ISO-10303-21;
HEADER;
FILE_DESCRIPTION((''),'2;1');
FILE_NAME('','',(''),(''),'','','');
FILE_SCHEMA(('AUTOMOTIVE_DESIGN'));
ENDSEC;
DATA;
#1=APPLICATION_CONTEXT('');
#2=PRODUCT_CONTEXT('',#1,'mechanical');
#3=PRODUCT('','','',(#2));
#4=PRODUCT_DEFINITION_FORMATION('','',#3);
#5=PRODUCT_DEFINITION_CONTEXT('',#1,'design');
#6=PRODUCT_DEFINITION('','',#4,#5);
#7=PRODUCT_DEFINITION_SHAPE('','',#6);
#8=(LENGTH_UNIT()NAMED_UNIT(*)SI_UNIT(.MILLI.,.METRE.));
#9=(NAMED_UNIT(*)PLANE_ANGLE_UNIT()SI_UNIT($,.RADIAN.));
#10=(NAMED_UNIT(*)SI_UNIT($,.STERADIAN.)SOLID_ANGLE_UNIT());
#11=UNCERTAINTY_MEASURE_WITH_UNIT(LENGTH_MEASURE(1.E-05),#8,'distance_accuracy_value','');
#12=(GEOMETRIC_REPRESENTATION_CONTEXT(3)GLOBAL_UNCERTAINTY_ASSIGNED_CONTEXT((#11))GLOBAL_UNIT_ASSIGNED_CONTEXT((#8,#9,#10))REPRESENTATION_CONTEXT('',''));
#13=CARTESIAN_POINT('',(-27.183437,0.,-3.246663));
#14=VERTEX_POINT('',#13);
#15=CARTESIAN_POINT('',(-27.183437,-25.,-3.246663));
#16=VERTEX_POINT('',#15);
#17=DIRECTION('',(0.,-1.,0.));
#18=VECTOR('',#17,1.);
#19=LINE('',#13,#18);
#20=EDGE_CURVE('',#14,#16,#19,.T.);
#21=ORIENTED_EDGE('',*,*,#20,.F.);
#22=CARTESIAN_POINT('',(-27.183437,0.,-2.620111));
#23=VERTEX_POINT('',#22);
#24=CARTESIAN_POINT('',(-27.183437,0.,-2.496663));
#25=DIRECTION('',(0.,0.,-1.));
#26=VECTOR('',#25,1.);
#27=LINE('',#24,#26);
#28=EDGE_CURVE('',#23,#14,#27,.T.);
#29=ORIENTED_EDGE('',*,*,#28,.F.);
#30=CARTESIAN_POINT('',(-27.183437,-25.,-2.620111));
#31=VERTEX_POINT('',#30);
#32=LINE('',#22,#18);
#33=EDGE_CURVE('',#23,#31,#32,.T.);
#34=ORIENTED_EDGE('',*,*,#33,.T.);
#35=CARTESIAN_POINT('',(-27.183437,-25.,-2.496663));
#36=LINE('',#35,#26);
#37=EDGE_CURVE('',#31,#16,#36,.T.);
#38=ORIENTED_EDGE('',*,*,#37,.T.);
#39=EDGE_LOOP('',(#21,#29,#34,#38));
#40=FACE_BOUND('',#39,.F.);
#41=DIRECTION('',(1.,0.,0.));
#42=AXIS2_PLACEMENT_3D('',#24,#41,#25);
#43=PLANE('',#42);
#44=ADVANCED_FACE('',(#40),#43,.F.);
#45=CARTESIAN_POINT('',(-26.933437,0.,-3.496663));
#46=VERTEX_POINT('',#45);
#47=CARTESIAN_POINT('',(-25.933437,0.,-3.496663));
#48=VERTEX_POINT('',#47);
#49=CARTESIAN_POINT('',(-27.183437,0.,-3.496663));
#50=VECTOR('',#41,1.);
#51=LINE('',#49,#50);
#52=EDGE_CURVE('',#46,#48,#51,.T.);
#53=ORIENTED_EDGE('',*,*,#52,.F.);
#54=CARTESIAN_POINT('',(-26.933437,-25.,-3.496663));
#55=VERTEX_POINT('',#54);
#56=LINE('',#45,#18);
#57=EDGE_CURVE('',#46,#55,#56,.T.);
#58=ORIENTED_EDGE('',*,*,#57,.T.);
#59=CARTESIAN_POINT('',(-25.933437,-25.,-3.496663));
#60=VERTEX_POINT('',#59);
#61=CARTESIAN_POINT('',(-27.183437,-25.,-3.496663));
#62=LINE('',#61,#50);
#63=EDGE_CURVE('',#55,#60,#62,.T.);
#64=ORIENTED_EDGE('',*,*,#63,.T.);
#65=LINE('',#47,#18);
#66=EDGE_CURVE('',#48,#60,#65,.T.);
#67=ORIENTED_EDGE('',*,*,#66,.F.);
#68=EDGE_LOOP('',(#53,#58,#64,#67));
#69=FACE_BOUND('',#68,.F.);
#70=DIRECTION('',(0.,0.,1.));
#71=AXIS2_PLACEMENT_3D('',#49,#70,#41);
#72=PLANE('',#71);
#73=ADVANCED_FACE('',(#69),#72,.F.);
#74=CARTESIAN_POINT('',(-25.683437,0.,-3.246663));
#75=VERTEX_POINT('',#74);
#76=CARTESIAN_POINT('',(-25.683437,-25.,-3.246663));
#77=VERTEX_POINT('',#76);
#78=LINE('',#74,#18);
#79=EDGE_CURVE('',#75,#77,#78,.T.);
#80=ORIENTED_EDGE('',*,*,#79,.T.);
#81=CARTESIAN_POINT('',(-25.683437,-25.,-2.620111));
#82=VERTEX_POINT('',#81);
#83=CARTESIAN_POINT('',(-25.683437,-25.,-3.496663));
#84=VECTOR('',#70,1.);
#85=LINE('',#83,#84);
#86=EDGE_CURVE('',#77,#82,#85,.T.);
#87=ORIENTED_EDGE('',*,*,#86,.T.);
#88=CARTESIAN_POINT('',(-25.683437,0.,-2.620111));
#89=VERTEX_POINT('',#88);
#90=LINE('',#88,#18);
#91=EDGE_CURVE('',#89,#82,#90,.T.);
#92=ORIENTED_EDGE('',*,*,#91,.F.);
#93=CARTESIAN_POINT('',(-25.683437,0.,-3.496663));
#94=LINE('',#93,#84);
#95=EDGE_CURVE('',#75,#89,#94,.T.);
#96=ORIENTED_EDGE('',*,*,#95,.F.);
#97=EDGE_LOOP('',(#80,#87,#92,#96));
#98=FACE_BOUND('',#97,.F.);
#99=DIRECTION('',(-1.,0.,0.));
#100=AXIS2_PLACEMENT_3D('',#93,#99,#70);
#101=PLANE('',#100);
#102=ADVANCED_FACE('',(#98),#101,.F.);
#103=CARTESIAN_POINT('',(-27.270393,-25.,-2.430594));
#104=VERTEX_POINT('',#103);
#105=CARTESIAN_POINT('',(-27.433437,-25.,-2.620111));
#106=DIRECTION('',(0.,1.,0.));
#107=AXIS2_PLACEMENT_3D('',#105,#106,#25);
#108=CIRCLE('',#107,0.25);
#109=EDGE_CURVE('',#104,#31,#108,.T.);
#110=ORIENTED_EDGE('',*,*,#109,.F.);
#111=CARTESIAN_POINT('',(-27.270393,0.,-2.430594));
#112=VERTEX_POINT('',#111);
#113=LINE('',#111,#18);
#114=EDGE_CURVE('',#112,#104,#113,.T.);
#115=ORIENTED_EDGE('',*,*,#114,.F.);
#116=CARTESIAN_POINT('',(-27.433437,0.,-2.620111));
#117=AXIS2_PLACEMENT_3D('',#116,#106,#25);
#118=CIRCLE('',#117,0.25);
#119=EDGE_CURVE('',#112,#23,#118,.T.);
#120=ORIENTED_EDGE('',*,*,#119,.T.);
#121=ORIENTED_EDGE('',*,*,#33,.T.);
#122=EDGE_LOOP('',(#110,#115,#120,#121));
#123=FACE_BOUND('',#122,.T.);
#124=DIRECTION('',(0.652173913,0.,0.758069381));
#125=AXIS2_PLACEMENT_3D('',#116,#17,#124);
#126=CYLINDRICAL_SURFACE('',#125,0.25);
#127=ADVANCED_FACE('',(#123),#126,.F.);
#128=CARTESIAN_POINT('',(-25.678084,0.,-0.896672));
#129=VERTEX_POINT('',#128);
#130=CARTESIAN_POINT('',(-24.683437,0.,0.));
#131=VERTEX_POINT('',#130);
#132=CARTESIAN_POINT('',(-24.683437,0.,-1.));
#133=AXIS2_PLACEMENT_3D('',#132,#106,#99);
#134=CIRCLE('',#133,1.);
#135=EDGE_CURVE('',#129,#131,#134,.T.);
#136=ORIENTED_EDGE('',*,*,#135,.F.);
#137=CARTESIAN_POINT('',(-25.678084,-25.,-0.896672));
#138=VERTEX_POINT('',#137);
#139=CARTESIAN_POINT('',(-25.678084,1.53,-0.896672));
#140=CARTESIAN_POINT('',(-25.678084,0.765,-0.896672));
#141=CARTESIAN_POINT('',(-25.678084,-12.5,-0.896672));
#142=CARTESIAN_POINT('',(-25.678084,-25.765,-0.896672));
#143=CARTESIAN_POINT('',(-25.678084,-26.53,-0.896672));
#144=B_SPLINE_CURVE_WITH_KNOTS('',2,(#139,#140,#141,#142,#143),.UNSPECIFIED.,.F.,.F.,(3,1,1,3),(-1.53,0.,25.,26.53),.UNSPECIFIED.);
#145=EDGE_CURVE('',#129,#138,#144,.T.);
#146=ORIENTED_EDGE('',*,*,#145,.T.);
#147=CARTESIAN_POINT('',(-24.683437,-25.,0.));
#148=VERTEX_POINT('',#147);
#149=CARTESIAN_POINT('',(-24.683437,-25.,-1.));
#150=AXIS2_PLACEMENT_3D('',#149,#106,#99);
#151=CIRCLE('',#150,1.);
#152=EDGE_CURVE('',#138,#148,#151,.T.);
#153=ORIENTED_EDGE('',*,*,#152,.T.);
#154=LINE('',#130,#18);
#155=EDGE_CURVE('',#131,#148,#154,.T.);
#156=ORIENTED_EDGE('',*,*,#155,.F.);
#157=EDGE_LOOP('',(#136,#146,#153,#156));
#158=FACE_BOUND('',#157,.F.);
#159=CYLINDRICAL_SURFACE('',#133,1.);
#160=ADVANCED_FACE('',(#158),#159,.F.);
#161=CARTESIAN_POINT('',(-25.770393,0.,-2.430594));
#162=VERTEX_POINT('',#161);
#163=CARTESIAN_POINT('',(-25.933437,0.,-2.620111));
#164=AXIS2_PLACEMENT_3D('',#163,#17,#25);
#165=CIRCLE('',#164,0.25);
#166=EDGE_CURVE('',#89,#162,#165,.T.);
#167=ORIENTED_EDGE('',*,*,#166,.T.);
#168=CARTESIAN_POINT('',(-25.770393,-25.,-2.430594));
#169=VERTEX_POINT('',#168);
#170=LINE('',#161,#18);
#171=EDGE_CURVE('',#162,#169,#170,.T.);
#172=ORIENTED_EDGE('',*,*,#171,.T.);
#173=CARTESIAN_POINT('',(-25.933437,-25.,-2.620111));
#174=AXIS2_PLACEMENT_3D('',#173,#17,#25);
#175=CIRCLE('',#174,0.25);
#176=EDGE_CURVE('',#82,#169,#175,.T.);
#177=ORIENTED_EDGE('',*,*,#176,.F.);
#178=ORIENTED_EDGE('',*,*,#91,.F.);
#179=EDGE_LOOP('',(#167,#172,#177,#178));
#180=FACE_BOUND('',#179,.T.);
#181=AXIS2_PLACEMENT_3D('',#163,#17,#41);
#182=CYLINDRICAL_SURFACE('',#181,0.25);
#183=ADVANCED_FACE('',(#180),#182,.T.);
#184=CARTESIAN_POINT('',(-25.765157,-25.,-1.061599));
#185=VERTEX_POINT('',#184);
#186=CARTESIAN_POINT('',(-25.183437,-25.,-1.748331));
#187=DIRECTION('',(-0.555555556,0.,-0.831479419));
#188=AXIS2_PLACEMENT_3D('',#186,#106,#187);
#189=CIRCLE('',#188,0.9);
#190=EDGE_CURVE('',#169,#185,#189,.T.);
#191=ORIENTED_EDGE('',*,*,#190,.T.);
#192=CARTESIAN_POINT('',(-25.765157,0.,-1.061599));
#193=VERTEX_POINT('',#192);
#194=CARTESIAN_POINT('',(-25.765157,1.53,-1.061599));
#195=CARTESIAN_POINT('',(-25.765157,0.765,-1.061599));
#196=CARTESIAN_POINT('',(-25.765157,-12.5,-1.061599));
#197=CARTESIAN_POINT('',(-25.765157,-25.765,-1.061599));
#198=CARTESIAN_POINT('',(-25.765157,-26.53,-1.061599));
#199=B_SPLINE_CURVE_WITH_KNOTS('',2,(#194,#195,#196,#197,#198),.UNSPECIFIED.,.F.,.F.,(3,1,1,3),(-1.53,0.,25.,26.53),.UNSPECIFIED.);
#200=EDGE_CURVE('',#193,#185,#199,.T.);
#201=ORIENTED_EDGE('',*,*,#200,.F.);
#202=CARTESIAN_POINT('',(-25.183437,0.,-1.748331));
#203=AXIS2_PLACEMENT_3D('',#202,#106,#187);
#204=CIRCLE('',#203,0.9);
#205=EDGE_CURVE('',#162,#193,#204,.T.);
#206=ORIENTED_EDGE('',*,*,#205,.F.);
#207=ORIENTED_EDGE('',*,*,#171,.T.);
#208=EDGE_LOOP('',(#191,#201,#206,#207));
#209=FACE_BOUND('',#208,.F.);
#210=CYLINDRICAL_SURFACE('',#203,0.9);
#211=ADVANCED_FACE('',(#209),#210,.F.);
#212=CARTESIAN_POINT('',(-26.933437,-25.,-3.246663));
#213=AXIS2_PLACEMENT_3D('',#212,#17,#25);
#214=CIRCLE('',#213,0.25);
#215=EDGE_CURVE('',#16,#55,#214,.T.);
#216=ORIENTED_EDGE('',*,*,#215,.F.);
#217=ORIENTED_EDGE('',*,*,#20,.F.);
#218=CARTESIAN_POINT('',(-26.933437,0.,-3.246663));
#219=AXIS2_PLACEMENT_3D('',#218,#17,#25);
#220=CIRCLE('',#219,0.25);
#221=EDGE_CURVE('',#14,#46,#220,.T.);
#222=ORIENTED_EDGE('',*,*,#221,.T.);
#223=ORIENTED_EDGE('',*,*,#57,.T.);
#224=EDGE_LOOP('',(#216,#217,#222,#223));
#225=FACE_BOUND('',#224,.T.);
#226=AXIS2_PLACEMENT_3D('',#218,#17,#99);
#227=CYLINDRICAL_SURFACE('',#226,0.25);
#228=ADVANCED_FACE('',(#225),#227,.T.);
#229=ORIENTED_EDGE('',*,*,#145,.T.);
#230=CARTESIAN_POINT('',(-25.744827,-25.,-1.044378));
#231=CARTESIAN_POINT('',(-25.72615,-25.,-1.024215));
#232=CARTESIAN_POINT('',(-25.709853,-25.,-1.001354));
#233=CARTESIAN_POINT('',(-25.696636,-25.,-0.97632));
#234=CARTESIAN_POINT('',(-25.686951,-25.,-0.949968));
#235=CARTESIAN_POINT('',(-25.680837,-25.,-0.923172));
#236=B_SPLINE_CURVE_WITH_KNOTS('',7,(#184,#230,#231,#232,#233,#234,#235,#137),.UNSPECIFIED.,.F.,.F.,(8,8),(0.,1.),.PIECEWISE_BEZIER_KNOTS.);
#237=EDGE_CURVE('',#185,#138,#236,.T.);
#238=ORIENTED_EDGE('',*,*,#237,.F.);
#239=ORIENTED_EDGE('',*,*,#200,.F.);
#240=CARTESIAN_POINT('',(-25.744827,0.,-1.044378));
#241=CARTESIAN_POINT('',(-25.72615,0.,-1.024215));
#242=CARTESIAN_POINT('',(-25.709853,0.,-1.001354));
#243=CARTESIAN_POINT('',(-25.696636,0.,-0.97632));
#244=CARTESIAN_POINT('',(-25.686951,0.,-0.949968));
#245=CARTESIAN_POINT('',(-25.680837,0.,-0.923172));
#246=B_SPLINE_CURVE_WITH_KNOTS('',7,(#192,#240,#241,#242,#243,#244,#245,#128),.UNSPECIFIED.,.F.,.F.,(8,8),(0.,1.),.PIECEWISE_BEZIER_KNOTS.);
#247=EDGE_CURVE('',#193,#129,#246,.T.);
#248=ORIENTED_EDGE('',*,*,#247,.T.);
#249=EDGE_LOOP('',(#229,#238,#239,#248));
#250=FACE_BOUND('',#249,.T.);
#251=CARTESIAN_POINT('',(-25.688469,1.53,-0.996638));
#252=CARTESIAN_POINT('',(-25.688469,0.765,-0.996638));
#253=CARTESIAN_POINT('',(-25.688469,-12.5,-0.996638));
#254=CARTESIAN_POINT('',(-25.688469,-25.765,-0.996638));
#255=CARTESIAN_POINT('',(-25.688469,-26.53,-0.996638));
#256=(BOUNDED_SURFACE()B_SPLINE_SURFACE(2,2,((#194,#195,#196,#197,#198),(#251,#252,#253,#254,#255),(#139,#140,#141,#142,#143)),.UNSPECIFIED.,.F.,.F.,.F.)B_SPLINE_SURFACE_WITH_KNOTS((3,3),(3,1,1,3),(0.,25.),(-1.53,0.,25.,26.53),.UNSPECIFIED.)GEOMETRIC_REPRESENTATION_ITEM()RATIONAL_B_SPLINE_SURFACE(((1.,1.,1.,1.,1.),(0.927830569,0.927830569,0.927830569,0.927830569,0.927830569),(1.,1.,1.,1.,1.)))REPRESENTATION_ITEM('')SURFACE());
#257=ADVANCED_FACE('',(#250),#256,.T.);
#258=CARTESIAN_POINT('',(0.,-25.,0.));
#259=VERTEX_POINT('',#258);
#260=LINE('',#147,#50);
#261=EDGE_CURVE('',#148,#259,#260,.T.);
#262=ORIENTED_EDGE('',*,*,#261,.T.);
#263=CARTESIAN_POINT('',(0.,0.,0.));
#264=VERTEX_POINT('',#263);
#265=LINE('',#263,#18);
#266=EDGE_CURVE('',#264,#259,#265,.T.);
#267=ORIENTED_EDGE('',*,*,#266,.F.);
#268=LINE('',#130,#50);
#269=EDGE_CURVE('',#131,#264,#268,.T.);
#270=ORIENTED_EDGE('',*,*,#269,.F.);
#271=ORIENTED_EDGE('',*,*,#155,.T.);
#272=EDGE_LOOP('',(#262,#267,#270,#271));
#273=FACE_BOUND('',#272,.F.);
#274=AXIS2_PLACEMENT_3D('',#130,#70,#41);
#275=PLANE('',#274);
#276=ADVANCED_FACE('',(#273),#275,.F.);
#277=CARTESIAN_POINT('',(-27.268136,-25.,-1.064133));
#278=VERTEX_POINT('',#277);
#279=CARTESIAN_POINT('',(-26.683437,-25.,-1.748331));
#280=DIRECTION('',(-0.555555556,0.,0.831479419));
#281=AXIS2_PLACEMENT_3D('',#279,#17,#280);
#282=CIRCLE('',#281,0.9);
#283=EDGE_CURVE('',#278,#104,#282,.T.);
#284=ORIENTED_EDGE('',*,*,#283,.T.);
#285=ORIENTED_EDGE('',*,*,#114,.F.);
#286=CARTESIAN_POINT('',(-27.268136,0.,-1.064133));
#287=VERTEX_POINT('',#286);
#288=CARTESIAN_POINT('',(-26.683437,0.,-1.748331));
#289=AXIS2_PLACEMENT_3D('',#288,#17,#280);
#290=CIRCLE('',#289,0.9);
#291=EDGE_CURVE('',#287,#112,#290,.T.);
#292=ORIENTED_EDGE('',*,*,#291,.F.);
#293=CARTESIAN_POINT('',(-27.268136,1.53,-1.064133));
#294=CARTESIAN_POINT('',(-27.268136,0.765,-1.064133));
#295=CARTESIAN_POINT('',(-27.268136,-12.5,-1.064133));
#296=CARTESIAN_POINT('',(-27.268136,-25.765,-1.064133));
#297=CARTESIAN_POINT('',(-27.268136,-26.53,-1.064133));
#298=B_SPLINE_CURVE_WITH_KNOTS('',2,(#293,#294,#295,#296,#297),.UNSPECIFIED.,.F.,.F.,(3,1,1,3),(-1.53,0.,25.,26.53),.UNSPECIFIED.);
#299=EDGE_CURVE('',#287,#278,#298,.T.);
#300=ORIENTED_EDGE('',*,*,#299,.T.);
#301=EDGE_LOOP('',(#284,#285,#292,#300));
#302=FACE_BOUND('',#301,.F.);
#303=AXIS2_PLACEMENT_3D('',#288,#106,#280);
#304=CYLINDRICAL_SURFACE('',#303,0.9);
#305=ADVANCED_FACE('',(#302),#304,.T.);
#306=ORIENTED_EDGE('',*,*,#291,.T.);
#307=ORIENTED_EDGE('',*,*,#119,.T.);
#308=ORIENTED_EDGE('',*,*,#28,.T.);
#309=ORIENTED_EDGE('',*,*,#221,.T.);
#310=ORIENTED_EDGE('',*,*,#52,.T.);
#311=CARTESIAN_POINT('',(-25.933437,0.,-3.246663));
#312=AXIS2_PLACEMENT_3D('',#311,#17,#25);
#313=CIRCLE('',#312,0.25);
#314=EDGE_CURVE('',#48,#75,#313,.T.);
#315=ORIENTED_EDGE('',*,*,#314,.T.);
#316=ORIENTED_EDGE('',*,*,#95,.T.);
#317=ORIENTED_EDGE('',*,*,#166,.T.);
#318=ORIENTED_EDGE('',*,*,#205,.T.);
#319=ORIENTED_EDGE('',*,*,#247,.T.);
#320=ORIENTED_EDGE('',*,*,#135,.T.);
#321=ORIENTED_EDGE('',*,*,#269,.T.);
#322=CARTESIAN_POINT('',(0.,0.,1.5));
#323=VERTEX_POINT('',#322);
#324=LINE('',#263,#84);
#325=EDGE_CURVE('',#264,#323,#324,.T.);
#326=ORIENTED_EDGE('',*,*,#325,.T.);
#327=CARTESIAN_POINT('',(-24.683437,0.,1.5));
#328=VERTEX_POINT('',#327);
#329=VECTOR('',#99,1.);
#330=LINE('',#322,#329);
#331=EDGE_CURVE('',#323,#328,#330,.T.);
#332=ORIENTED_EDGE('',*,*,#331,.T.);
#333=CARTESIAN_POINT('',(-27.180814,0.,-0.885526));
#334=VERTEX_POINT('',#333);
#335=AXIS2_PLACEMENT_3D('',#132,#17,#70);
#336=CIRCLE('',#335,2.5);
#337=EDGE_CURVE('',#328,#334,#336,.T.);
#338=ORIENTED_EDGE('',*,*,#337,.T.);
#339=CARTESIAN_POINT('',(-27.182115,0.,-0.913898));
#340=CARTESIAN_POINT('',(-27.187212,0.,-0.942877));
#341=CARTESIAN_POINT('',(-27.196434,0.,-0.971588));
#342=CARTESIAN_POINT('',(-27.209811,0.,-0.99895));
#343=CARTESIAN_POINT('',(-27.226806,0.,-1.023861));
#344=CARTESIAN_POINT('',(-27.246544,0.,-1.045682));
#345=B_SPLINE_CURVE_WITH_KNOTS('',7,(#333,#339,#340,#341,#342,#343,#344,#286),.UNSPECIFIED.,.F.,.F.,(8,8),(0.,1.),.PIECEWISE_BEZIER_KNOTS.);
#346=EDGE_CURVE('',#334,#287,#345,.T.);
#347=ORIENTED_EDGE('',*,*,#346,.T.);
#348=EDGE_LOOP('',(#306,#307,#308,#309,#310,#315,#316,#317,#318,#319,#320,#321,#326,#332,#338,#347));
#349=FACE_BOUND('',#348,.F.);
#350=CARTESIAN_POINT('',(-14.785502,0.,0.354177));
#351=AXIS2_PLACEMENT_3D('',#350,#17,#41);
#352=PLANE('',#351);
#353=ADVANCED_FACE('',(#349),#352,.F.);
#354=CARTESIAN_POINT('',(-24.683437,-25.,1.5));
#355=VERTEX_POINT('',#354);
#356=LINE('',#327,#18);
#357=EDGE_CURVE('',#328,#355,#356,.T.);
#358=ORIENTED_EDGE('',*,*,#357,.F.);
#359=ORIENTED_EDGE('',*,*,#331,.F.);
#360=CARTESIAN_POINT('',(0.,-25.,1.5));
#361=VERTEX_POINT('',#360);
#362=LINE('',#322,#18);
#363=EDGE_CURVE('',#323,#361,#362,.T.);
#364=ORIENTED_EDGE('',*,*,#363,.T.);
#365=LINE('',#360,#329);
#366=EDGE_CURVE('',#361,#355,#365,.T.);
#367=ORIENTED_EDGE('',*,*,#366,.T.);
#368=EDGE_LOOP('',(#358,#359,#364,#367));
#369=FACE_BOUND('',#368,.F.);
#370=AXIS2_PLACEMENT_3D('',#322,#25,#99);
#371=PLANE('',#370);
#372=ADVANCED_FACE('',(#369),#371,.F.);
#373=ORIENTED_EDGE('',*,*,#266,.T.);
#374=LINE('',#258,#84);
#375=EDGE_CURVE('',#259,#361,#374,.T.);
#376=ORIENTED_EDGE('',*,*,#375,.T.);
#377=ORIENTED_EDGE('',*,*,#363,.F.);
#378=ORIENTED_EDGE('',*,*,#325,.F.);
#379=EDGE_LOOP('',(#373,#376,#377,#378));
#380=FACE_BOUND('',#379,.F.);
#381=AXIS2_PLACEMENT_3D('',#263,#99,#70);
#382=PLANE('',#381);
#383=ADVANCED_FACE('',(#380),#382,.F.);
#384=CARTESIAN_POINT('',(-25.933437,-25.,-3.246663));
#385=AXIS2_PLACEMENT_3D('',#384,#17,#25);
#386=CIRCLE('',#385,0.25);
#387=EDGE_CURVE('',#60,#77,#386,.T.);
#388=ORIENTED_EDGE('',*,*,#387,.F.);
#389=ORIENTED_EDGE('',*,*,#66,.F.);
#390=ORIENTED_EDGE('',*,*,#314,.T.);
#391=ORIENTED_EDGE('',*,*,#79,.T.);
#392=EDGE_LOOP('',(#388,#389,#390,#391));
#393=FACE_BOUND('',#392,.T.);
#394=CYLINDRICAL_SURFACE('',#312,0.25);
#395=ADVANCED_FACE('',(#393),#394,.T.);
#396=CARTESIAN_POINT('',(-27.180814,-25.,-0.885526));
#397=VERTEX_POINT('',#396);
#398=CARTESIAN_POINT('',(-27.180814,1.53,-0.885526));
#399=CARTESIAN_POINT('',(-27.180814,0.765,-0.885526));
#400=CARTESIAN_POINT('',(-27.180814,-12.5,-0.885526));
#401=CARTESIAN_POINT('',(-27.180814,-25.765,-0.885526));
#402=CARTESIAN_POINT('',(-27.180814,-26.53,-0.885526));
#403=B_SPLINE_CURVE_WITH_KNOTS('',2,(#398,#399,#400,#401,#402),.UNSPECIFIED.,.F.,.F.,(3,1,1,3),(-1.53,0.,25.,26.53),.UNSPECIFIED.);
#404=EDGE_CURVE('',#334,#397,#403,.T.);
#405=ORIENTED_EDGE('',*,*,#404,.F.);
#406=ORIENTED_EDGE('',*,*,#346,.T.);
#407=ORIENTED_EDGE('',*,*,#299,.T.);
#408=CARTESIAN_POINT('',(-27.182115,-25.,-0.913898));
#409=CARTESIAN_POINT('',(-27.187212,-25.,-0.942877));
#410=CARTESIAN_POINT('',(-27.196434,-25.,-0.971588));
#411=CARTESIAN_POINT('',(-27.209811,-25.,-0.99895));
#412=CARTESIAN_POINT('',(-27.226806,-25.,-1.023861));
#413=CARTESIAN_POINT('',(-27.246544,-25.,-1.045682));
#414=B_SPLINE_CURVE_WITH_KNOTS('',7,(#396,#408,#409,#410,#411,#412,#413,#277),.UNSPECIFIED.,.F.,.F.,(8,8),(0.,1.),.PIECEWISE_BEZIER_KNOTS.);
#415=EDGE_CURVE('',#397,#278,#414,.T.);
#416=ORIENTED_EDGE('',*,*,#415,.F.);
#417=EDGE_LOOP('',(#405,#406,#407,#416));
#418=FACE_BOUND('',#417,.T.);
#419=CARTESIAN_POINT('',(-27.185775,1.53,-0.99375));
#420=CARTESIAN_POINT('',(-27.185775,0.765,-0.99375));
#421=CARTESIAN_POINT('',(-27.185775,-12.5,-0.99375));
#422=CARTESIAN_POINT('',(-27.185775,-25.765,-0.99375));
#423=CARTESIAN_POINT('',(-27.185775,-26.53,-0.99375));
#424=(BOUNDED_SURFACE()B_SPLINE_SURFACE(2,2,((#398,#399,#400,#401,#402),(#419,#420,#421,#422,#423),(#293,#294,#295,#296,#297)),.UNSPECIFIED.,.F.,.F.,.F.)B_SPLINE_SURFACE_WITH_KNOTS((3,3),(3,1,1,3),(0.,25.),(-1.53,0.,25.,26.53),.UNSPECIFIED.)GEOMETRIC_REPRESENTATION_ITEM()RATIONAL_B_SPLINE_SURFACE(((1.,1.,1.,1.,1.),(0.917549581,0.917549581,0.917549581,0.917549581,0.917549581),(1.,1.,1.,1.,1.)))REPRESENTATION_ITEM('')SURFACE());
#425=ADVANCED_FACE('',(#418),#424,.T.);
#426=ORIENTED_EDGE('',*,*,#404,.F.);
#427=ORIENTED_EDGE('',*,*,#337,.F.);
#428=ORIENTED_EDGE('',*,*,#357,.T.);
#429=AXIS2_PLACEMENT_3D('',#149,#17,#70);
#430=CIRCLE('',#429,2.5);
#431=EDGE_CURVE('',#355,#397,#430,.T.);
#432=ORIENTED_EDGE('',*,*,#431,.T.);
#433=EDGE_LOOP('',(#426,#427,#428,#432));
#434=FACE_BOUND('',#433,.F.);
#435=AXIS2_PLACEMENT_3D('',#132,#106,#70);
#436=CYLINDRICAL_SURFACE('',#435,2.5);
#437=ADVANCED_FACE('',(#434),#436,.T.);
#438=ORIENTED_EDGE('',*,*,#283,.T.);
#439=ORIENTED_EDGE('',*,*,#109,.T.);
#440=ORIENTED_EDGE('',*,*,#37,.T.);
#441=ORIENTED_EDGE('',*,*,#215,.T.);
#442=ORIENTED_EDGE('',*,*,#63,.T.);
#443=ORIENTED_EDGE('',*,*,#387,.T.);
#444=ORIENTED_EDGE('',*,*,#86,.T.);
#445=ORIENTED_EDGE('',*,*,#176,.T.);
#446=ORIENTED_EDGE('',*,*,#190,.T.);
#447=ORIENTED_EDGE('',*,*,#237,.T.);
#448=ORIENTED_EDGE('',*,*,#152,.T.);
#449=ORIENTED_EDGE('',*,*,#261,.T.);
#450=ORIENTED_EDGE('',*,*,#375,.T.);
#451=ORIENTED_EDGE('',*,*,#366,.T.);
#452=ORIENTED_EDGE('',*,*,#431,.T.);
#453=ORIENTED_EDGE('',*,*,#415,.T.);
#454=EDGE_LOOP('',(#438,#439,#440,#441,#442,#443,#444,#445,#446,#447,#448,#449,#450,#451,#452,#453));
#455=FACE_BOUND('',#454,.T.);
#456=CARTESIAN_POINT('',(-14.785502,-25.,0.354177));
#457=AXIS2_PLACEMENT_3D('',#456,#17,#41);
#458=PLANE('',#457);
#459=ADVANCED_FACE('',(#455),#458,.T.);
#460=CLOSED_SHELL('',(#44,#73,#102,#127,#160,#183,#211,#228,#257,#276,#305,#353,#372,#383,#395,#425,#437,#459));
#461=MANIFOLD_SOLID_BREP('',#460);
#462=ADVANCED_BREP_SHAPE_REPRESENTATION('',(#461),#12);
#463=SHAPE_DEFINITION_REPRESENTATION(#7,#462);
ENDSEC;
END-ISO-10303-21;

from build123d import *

# Parameters (mm, degrees)
F1_DEPTH = 25
F2_R     = 0.25


with BuildPart() as f1:
    # F0 (on Front) → F1 (new body)
    with BuildSketch(Plane.XZ):
        with BuildLine():
            Line((-24.683436538, 0), (0, 0))
            Line((0, 0), (0, 1.5))
            Line((0, 1.5), (-24.683436538, 1.5))
            ThreePointArc((-24.683436538, 1.5), (-26.451203491, 0.767766953), (-27.183436538, -1))
            ThreePointArc((-27.183436538, -1), (-27.583436538, -1.7483314774), (-27.183436538, -2.4966629547))
            Line((-27.183436538, -2.4966629547), (-27.183436538, -3.4966629547))
            Line((-27.183436538, -3.4966629547), (-25.683436538, -3.4966629547))
            Line((-25.683436538, -3.4966629547), (-25.683436538, -2.4966629547))
            ThreePointArc((-25.683436538, -2.4966629547), (-26.083436538, -1.7483314774), (-25.683436538, -1))
            ThreePointArc((-25.683436538, -1), (-25.3905433192, -0.2928932188), (-24.683436538, 0))
        make_face()
    extrude(amount=F1_DEPTH)

    # F2
    f2_edges = [f1.edges().sort_by_distance(p)[0] for p in [
        (-27.183437, -12.5, -3.496663),
        (-25.683437, -12.5, -3.496663),
        (-25.683437, -12.5, -2.496663),
        (-25.683437, -12.5, -1),
        (-27.183437, -12.5, -2.496663),
        (-27.183437, -12.5, -1),
    ]]
    fillet(f2_edges, radius=F2_R)


solid = f1.part
